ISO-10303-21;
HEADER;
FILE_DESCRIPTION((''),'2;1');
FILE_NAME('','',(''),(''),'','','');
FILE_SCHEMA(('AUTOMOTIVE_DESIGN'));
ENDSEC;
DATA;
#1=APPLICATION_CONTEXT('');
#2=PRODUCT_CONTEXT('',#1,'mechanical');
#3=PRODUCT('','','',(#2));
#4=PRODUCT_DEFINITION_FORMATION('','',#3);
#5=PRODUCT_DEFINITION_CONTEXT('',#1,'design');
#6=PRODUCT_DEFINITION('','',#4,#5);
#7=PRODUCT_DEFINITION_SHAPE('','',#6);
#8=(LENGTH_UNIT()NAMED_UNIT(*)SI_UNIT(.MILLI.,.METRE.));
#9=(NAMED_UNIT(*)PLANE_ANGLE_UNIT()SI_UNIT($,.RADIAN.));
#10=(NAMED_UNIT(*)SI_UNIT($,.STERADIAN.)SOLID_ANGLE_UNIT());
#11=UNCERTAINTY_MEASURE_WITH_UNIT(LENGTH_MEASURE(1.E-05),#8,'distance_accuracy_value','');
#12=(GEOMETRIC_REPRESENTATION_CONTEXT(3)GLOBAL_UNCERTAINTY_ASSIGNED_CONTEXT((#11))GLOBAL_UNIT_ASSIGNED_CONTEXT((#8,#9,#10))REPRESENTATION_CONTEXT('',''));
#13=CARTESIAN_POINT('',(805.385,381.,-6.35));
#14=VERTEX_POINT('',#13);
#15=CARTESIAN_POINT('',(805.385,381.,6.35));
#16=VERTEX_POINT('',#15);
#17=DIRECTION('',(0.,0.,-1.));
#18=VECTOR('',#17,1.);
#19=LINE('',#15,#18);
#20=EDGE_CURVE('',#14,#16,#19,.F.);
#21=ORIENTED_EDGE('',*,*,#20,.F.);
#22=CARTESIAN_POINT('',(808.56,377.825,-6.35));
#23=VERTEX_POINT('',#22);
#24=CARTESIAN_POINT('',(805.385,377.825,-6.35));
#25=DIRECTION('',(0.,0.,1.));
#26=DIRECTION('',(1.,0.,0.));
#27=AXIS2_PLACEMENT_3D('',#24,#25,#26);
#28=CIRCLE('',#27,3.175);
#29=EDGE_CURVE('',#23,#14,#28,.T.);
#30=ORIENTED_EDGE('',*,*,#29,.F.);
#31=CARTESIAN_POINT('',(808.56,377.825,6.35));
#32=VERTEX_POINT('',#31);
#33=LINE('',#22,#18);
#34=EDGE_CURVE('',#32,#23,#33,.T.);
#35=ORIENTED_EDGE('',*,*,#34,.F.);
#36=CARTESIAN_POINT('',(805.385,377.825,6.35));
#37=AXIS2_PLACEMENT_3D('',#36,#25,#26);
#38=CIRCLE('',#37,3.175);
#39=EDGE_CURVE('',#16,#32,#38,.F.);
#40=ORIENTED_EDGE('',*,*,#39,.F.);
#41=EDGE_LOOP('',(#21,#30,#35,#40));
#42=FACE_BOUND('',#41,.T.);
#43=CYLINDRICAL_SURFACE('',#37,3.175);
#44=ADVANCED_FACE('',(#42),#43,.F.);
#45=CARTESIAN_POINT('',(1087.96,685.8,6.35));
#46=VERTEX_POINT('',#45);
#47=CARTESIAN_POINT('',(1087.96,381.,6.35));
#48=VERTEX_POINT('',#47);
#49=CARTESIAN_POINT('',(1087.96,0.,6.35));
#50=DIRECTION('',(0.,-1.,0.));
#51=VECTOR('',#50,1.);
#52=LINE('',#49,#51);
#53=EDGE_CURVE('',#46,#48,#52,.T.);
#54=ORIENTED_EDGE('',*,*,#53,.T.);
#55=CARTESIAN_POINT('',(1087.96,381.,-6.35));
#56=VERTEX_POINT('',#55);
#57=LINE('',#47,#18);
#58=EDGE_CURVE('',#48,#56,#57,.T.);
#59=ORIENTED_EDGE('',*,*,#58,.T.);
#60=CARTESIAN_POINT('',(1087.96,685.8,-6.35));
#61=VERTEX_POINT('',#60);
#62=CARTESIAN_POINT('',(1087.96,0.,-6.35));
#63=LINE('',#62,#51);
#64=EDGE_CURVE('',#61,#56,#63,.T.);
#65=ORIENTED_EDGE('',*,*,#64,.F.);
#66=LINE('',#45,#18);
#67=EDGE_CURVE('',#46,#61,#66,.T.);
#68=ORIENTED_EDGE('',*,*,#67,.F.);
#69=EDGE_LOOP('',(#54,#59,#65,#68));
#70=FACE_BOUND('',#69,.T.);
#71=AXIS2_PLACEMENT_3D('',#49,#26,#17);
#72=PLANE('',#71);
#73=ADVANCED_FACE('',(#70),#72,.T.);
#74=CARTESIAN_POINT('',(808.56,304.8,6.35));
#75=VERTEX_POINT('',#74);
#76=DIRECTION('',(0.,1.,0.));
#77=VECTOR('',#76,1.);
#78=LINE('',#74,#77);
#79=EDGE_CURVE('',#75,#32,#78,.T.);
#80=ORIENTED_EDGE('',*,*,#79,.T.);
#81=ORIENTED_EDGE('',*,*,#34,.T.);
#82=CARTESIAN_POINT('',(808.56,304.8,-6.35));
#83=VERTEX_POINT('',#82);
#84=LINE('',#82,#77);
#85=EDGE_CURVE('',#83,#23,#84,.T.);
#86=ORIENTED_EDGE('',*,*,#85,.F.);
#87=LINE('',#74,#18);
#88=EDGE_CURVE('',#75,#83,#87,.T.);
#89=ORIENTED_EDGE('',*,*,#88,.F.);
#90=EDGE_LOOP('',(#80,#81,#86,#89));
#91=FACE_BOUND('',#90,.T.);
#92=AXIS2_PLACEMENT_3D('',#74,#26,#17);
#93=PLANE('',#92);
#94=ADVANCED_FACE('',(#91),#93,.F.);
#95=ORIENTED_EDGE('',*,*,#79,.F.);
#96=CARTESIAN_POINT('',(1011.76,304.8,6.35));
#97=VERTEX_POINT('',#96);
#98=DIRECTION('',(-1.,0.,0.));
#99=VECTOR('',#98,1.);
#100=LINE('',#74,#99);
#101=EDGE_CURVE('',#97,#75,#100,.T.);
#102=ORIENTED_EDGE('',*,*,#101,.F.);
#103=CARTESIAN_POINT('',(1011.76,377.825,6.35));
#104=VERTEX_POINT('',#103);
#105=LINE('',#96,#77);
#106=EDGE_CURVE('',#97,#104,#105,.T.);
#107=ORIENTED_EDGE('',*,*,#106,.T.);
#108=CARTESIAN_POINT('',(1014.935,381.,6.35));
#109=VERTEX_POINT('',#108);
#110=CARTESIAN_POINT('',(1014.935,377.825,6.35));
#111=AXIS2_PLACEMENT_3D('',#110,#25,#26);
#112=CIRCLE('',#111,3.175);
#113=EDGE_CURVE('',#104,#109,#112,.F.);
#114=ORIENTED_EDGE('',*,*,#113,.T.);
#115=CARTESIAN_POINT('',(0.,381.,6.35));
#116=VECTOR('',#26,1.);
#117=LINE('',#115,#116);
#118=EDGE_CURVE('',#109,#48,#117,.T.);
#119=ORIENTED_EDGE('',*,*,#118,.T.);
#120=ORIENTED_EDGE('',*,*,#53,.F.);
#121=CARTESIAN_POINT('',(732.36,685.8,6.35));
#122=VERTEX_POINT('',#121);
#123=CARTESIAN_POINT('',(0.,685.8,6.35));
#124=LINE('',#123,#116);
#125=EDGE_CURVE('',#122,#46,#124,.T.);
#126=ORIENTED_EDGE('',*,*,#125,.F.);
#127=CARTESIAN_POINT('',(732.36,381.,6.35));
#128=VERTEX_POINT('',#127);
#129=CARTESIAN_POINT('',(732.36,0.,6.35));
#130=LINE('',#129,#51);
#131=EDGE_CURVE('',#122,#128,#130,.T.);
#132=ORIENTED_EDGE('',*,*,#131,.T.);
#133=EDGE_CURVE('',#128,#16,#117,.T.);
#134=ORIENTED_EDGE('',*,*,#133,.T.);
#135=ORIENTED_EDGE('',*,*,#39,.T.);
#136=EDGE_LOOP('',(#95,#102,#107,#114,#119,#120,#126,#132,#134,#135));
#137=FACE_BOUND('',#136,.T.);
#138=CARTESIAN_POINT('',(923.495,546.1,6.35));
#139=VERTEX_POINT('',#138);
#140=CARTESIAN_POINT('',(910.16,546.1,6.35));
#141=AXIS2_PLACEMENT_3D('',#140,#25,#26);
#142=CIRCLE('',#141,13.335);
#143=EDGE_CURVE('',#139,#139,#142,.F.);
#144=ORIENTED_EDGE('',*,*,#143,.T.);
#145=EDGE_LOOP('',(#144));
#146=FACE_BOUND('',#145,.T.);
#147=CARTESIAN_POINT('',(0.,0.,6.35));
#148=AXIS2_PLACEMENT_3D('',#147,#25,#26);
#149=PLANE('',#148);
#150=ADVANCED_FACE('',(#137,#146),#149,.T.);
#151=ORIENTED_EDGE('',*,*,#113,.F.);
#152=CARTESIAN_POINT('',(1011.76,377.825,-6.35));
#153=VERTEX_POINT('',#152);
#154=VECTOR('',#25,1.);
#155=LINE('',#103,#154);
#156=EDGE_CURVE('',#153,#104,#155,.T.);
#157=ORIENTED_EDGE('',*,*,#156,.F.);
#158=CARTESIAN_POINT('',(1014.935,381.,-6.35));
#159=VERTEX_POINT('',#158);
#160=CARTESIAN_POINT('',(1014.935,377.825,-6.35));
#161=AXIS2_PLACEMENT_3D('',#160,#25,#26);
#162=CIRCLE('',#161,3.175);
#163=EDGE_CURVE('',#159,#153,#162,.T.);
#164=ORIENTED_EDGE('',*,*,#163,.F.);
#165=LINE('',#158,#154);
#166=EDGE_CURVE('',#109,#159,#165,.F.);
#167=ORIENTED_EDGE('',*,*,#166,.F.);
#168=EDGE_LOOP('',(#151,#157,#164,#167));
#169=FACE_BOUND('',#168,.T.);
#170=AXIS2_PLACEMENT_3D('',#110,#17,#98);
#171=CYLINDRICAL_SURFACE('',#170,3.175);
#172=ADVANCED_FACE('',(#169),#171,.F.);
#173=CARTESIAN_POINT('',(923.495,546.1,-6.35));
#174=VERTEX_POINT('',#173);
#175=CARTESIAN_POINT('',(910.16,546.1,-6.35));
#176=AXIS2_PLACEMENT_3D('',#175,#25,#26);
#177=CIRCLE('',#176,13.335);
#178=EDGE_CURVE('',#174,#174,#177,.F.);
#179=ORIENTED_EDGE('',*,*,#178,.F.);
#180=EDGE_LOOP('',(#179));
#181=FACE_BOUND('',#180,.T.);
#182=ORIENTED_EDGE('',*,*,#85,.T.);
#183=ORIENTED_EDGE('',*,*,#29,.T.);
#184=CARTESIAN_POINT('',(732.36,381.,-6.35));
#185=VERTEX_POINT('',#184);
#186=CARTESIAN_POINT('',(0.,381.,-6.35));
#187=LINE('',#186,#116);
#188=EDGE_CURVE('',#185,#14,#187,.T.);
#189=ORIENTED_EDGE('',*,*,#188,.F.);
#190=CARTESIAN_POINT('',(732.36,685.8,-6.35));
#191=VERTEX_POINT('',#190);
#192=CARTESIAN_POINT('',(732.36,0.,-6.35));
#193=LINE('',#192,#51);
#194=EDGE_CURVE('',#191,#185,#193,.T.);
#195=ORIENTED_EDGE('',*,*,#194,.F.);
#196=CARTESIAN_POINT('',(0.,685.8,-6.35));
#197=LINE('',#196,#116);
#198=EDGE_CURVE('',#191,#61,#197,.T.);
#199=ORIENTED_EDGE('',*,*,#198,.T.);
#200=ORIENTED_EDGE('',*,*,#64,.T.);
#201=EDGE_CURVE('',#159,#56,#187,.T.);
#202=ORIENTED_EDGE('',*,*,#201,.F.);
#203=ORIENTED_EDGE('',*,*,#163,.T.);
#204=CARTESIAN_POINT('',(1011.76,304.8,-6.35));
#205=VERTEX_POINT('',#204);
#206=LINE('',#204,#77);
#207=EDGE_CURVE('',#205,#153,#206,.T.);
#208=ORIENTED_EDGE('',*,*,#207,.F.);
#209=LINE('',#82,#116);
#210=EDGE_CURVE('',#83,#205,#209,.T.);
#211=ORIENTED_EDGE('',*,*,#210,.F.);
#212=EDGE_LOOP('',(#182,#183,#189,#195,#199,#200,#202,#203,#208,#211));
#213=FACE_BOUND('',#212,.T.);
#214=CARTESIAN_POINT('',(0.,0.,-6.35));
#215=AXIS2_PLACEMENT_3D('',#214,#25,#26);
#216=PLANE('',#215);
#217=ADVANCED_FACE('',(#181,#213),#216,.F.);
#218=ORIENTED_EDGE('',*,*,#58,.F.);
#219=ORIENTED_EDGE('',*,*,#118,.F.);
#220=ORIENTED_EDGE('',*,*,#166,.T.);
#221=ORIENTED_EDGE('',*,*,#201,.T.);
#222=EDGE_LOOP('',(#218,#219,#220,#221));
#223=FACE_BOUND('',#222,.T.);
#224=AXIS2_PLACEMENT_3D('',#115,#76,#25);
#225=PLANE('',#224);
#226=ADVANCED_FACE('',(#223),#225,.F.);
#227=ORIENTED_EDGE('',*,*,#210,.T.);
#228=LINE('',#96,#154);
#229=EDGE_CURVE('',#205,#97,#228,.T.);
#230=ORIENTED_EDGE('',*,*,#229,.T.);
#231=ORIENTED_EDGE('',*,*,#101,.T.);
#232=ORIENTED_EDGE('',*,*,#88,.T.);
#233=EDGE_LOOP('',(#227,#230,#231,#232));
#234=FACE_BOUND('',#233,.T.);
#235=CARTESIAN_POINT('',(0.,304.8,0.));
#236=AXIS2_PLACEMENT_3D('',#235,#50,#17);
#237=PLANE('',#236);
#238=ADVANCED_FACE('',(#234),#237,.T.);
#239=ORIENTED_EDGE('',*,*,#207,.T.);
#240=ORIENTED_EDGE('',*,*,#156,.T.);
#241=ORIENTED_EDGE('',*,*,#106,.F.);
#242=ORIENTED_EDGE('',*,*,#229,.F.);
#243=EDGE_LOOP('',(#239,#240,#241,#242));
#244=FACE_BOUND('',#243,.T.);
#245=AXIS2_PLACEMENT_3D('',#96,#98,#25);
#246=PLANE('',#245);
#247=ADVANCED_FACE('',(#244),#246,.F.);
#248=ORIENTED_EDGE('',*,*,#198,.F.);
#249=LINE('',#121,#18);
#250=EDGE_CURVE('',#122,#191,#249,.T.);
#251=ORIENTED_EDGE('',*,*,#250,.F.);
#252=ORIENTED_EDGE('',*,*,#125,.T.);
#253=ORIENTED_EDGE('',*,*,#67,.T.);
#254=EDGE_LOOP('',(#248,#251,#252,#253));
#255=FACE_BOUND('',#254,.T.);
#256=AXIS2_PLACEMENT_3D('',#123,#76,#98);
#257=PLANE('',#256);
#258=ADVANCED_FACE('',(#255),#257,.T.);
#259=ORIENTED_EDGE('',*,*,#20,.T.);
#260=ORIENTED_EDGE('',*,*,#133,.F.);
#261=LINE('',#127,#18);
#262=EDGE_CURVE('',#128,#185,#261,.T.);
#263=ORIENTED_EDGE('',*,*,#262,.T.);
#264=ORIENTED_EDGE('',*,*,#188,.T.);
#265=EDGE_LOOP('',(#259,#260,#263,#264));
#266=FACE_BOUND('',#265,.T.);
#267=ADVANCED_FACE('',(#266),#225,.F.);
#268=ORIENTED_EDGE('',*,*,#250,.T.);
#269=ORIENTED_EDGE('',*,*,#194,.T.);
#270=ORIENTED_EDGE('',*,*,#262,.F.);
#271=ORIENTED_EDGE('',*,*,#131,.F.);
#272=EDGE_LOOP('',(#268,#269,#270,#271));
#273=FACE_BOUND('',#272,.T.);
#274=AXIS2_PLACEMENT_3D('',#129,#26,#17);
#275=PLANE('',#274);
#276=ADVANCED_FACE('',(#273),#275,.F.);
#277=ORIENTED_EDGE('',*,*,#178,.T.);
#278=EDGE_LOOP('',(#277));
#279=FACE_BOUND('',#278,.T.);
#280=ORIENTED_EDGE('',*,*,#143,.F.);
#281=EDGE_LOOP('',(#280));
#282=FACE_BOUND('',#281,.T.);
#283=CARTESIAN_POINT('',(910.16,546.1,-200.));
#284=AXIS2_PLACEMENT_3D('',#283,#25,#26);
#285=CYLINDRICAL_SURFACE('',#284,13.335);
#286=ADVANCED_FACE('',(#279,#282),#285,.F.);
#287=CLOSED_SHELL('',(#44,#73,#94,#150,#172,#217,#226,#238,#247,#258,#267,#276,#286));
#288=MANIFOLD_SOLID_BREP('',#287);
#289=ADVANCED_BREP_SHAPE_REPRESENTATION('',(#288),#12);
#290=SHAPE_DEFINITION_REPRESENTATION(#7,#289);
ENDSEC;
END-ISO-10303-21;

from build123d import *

# Parameters (mm, degrees)
BOSS_EXTRUDE1_DEPTH = 6.35
SKETCH3_W           = 203.2
SKETCH3_H           = 12.7
BOSS_EXTRUDE2_DEPTH = 76.2
CAVITY1_START       = -6.35
CAVITY1_OUTLINE_R   = 12.7
CAVITY1_DEPTH       = 12.7
MOVE_FACE_HOLE_BY   = 0.635
SLOT_FILLET_R       = 3.175


# Read off the part's stored shape, not the designer's step: Cavity1
with BuildPart() as part:
    # Sketch1 → Boss-Extrude1 (new, symmetric)
    with BuildSketch(Plane.XY):
        Polygon((732.36, 381), (785.7, 381), (1001.6, 381), (1087.96, 381), (1087.96, 685.8), (1001.6, 685.8), (785.7, 685.8), (732.36, 685.8), align=None)
    extrude(amount=BOSS_EXTRUDE1_DEPTH, both=True)

    # Sketch3 → Boss-Extrude2 (add)
    with BuildSketch(Plane.XZ.offset(-381)):
        with Locations((910.16, 0)):
            Rectangle(SKETCH3_W, SKETCH3_H)
    extrude(amount=BOSS_EXTRUDE2_DEPTH)

    # Cavity1 outline → Cavity1 (cut)
    with BuildSketch(Plane.XY.offset(CAVITY1_START)):
        with Locations((910.16, 546.1)):
            Circle(CAVITY1_OUTLINE_R)
    extrude(amount=CAVITY1_DEPTH, mode=Mode.SUBTRACT)

    # Move Face Hole: a curved face moved inward by 0.635
    add(Solid.thicken(part.faces().sort_by_distance((897.46, 546.1, 0))[0], -MOVE_FACE_HOLE_BY), mode=Mode.SUBTRACT)

    # Slot Fillet
    slot_fillet_edges = [part.edges().sort_by_distance(p)[0] for p in [
        (808.56, 381, 0),
        (1011.76, 381, 0),
    ]]
    fillet(slot_fillet_edges, radius=SLOT_FILLET_R)


solid = part.part
